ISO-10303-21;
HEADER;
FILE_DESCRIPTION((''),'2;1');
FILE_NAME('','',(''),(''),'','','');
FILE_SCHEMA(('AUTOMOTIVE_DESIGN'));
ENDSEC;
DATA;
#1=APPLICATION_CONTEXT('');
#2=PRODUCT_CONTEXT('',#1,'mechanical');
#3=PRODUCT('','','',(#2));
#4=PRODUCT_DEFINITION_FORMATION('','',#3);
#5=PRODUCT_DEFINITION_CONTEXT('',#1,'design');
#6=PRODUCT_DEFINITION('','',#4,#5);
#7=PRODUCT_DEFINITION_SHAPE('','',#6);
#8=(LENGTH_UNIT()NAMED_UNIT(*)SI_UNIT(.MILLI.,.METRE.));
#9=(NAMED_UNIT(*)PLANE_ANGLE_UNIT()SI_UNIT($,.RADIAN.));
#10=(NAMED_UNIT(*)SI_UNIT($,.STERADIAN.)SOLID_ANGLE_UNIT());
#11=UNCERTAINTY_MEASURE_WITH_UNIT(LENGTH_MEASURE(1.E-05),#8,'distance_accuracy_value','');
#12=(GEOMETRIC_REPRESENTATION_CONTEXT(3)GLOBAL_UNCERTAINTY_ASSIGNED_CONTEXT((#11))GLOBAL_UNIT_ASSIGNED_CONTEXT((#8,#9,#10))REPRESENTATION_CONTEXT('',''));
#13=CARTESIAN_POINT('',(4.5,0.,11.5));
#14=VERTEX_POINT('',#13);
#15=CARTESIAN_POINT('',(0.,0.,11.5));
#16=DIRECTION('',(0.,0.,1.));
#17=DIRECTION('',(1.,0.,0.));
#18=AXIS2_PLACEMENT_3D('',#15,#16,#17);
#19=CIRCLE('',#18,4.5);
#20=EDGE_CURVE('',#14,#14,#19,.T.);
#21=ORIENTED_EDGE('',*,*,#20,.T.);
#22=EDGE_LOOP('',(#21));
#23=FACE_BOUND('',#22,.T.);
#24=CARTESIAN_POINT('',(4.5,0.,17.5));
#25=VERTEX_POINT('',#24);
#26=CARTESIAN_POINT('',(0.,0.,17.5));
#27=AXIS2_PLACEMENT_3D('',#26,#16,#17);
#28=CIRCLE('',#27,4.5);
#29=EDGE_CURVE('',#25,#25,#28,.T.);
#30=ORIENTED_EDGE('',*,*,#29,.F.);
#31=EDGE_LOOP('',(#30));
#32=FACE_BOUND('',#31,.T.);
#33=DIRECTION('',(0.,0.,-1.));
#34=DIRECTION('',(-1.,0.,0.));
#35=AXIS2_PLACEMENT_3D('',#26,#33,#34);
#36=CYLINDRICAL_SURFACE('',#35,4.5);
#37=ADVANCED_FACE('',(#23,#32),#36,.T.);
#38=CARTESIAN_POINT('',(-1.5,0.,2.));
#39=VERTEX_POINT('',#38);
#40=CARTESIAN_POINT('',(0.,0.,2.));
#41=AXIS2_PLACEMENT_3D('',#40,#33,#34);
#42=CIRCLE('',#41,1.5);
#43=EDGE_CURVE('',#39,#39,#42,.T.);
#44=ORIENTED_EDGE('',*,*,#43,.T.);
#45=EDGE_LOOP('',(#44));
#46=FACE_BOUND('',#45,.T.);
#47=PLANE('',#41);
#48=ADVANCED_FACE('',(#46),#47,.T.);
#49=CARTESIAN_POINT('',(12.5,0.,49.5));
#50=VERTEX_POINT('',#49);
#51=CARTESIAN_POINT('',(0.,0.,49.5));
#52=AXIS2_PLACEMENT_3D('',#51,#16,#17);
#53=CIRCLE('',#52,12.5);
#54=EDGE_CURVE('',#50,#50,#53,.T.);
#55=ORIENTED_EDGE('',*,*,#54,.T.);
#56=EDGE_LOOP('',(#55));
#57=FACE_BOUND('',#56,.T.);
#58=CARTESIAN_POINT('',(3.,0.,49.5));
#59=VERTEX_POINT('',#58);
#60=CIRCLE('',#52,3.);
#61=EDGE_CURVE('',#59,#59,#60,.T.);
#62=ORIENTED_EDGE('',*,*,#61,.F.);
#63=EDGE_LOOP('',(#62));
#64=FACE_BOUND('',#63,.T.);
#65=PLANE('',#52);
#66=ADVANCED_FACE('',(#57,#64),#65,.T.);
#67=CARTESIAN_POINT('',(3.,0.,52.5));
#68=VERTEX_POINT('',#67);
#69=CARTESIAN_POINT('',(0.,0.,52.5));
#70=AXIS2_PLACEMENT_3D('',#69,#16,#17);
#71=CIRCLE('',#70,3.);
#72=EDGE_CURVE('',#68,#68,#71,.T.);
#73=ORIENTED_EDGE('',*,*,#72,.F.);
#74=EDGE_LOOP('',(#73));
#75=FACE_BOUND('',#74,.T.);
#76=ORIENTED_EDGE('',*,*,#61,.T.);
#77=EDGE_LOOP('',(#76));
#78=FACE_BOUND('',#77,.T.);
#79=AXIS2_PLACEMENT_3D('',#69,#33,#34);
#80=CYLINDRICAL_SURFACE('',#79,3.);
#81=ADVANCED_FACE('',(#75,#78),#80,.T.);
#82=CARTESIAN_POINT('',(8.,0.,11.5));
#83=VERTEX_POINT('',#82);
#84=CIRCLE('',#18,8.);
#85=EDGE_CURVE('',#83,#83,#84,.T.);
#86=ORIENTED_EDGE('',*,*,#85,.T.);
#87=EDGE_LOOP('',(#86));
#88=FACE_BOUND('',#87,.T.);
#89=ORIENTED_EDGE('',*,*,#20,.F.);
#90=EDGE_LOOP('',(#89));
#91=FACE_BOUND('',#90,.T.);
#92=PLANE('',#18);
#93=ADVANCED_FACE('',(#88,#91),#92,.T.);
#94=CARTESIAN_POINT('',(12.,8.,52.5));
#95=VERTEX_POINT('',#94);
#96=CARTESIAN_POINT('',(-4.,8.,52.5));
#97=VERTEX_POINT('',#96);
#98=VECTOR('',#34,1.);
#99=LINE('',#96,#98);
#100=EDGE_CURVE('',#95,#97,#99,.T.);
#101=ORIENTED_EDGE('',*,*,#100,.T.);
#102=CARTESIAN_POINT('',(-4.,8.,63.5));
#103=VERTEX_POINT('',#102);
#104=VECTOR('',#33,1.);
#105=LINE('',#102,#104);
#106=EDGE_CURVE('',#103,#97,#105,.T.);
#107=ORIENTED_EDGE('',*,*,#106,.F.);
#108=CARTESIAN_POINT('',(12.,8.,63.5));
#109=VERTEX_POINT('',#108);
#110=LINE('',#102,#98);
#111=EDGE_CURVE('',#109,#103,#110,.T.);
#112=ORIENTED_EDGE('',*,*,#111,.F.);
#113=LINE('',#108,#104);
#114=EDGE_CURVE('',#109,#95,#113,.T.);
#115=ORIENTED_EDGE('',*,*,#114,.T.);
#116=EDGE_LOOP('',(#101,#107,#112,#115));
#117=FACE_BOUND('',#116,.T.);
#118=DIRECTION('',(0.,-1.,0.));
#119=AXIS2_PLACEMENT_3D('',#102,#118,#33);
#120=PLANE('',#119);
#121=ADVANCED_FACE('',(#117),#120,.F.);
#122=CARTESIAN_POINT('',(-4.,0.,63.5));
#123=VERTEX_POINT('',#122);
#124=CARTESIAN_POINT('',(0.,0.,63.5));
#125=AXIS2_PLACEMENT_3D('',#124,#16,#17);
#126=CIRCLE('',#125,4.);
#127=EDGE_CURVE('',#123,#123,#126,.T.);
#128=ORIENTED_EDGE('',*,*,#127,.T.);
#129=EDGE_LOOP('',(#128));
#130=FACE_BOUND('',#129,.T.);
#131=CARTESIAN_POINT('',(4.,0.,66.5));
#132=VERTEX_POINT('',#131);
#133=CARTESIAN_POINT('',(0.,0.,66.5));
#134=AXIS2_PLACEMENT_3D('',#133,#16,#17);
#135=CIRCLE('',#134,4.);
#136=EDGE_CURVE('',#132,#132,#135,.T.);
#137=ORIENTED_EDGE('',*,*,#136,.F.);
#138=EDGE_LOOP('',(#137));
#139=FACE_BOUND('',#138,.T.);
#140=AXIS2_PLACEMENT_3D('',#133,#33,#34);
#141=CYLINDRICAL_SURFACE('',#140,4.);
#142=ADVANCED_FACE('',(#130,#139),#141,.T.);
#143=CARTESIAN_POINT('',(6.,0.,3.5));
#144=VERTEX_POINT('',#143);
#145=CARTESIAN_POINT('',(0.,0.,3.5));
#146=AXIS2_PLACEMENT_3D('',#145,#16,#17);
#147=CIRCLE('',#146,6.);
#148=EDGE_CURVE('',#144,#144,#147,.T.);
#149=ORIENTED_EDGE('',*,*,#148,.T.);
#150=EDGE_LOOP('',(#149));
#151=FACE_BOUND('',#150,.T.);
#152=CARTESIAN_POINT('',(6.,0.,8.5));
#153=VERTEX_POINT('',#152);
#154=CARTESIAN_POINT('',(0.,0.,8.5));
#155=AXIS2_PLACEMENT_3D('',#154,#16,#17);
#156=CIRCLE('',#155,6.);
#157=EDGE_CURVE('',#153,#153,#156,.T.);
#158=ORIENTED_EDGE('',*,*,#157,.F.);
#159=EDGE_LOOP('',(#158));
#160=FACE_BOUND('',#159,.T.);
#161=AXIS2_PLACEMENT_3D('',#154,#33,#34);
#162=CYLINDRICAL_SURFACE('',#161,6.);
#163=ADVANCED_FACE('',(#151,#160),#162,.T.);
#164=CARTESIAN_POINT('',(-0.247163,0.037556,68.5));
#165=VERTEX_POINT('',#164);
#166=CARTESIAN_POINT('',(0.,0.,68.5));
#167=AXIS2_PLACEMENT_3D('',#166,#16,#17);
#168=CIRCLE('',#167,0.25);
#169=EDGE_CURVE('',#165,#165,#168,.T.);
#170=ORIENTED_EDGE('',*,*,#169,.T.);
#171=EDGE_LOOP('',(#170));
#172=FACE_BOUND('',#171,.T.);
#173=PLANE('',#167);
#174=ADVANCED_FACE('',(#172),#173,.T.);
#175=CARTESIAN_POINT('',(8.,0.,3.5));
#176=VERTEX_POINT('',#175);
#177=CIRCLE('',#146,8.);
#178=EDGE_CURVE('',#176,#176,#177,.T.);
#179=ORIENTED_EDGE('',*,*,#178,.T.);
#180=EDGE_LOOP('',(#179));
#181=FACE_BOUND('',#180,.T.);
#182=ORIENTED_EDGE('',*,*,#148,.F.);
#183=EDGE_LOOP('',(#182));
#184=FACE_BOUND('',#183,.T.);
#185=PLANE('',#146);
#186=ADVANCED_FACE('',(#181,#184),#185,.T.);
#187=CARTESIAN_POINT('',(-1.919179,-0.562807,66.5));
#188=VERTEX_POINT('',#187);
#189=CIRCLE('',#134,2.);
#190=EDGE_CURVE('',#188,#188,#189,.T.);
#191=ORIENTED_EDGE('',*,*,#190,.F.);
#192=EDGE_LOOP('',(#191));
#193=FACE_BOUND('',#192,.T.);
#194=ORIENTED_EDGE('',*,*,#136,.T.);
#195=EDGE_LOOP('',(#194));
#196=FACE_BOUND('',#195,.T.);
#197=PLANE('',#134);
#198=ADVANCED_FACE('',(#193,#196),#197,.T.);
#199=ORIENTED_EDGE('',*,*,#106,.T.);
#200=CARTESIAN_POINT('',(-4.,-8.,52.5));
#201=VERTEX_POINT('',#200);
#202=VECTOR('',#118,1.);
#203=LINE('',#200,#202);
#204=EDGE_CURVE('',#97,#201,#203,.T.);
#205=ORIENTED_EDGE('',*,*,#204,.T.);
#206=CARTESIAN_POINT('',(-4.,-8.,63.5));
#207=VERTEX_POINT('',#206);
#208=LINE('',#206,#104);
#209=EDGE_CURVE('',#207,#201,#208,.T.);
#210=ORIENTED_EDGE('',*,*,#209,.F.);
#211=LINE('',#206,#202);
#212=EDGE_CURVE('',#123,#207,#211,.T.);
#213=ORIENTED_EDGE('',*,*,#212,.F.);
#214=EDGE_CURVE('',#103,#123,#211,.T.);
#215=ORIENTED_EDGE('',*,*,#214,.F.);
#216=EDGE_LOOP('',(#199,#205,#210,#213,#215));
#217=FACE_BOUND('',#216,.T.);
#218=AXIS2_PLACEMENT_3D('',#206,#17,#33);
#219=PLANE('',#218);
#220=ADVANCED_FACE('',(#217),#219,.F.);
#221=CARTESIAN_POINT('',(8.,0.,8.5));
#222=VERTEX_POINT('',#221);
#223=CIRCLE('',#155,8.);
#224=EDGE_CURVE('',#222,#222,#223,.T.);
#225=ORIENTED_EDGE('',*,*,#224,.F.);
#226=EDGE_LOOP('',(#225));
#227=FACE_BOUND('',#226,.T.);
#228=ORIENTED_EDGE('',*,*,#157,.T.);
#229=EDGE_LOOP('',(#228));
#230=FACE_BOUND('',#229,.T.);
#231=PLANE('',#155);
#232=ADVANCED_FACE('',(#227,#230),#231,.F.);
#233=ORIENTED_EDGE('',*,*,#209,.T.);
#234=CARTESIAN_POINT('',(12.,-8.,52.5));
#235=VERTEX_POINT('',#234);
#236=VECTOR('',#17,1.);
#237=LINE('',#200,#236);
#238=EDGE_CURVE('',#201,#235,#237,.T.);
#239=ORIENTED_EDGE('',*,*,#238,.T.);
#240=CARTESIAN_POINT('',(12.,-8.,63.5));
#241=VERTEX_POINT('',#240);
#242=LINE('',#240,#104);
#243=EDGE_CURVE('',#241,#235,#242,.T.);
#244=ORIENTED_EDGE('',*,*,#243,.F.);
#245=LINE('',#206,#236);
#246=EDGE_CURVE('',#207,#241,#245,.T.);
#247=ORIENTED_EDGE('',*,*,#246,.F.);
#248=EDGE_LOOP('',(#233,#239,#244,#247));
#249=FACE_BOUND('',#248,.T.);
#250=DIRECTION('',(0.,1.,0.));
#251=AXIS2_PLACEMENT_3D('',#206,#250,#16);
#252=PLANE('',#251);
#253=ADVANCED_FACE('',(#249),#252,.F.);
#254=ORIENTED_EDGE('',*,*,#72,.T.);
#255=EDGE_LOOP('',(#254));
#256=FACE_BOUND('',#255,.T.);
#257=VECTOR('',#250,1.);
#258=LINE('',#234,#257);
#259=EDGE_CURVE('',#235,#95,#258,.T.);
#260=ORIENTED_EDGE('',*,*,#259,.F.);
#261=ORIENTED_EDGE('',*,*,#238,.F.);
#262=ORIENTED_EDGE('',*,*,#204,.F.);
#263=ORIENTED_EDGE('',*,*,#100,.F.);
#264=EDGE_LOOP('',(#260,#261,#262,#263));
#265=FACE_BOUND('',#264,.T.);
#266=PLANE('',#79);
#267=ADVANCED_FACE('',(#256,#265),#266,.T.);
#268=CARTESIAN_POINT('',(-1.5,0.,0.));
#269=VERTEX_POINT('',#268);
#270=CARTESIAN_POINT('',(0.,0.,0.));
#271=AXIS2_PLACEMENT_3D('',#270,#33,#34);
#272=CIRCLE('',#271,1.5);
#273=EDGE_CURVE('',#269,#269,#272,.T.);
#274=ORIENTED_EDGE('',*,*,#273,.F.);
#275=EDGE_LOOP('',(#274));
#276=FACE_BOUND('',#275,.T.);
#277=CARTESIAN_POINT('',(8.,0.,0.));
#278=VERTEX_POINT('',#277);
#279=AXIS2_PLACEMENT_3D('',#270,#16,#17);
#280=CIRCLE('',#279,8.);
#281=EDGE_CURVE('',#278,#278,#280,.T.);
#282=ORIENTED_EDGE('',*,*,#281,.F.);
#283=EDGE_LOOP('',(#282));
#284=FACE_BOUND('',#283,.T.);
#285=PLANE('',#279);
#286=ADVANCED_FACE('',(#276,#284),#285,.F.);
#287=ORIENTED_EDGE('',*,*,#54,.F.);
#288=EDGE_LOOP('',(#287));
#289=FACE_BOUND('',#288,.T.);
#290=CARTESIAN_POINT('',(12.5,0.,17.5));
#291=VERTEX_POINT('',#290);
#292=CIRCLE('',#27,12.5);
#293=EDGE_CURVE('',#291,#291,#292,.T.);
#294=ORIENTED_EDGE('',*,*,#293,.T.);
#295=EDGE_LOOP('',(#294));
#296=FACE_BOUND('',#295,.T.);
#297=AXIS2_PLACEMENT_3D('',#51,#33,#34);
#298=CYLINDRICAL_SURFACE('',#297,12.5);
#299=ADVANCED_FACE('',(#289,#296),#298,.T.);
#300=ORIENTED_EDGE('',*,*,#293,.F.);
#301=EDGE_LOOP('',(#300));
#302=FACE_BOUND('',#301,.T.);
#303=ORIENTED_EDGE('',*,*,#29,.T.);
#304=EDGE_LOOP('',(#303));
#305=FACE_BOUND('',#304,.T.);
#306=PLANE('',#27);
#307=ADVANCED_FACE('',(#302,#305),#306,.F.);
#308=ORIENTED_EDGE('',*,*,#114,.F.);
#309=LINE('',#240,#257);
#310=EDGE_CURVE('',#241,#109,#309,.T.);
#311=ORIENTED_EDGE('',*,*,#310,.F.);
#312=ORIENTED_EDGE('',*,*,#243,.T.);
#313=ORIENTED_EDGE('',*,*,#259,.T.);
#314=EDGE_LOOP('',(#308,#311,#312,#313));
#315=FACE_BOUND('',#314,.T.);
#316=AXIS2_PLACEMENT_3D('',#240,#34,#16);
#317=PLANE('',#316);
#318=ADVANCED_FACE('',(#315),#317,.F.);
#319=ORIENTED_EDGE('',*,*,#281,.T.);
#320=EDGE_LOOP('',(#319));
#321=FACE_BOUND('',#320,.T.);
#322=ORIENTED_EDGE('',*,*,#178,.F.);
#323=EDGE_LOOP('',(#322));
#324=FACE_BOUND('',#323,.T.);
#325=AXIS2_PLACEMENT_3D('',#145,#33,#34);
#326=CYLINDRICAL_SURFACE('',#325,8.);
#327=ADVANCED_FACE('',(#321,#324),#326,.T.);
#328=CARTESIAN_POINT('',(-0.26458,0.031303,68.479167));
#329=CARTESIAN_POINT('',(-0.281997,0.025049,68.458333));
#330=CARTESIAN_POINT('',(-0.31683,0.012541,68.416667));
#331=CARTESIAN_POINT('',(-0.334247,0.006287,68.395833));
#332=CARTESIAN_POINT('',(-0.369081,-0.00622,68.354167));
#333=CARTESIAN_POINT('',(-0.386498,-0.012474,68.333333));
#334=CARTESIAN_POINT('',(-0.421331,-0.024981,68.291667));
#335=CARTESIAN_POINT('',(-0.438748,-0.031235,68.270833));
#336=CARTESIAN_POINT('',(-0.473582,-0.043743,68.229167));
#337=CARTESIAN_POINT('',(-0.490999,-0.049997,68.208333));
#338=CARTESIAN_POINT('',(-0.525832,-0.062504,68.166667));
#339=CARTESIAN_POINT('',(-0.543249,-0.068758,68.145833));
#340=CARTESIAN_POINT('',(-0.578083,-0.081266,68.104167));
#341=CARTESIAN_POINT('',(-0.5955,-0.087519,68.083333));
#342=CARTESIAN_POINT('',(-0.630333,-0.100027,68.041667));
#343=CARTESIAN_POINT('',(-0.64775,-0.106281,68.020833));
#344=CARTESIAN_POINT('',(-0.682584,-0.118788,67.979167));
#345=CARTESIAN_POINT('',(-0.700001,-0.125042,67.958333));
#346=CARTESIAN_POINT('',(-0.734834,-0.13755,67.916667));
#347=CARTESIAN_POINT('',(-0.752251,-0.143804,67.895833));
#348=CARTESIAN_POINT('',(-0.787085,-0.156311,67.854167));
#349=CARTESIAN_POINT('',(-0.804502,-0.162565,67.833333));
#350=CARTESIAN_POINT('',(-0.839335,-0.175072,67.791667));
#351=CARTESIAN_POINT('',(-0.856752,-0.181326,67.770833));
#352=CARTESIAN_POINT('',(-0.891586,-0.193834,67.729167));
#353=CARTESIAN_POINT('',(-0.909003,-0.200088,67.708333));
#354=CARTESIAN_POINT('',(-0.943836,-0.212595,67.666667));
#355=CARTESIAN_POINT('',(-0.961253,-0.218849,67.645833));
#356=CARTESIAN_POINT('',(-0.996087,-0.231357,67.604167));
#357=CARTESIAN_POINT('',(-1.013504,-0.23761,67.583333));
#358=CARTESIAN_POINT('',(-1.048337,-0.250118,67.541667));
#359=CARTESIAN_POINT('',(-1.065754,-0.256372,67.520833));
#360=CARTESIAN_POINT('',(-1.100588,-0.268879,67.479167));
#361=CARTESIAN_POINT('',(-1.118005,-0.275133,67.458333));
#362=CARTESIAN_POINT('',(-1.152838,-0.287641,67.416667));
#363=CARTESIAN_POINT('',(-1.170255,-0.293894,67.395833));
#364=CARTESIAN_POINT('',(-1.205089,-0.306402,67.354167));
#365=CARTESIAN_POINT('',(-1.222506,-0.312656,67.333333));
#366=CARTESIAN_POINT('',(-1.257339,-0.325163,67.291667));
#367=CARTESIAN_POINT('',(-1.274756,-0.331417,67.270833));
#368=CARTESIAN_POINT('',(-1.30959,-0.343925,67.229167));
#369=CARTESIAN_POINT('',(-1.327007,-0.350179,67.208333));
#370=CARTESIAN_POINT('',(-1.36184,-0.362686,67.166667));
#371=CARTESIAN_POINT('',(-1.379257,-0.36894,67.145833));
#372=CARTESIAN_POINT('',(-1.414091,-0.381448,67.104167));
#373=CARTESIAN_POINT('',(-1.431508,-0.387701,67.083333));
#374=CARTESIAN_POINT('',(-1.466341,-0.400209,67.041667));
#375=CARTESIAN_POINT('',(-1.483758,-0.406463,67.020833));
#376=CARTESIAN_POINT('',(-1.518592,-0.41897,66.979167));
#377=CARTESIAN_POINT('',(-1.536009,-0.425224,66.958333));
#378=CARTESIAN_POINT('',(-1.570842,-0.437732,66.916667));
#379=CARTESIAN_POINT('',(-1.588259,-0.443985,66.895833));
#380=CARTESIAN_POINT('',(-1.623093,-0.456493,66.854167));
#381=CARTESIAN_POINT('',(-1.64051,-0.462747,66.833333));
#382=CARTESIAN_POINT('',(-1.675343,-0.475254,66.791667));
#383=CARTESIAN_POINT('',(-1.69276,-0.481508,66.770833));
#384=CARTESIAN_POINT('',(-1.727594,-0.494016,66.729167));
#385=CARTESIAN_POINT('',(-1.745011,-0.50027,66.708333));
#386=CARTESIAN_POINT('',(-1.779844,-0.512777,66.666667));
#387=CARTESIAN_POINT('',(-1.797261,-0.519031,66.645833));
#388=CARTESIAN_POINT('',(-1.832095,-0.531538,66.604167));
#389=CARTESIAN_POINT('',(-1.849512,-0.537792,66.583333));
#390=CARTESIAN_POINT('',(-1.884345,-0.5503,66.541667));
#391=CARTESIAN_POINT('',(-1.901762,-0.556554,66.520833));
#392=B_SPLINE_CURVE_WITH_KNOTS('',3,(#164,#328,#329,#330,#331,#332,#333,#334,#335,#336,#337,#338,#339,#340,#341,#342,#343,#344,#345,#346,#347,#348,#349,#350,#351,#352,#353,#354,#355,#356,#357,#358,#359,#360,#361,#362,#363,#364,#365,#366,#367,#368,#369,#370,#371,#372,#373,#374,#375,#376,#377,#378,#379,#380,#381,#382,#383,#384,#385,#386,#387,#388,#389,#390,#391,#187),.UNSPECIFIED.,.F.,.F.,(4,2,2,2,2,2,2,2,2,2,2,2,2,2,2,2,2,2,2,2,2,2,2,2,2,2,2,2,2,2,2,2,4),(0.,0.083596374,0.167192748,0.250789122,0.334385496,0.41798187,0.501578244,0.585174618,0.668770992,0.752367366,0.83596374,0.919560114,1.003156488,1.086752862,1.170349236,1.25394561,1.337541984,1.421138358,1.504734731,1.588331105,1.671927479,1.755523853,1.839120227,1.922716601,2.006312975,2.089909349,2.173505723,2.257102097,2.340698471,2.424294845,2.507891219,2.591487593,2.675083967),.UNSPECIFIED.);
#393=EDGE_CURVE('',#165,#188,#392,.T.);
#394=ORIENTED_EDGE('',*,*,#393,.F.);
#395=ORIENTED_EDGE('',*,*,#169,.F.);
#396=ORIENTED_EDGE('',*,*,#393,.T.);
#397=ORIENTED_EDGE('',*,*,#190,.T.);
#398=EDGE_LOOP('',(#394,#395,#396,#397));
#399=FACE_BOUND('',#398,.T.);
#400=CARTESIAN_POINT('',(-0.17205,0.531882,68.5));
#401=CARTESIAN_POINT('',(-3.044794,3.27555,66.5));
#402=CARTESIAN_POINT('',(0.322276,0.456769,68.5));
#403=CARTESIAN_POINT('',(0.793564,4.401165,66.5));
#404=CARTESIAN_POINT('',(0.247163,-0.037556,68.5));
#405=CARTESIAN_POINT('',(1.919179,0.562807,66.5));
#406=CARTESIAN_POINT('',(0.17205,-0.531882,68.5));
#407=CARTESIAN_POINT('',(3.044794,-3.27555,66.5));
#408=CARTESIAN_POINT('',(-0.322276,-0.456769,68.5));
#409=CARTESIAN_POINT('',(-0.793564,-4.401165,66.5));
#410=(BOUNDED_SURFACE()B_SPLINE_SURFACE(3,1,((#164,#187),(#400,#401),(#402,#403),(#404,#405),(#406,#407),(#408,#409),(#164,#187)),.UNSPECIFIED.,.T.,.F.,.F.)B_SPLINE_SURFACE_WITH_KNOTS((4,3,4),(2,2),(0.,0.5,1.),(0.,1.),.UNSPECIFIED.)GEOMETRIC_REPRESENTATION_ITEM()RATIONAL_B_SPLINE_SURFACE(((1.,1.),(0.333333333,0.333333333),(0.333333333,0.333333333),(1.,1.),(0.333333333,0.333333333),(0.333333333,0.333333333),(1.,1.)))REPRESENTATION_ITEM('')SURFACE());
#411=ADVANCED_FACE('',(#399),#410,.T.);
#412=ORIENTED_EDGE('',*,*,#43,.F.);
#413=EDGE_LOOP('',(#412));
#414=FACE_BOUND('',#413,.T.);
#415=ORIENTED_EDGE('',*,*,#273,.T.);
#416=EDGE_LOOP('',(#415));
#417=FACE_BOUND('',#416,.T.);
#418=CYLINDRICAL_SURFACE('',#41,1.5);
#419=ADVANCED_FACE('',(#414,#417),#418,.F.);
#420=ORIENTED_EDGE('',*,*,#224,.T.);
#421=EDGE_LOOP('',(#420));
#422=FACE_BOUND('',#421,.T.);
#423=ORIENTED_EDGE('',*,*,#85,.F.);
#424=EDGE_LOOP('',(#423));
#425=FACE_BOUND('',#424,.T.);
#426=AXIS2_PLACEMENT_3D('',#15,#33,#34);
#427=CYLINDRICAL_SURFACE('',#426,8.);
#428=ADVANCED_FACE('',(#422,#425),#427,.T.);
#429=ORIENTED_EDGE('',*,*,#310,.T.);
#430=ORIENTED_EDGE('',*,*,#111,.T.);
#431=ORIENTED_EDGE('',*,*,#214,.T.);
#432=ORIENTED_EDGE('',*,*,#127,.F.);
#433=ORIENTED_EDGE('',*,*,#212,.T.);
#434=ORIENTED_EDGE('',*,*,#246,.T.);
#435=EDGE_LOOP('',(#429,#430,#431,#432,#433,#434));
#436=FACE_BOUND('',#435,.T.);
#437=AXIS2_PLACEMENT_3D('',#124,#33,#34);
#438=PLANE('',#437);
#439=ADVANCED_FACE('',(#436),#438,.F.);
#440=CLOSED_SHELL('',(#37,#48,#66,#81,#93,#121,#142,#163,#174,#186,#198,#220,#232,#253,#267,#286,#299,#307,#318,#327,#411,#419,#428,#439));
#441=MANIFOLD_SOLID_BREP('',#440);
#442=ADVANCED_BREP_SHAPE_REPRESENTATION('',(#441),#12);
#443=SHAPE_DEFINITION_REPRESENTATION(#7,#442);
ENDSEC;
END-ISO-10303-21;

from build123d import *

# Parameters (mm, degrees)
SKETCH1_R           = 8
BOSS_EXTRUDE1_DEPTH = 3.5
SKETCH2_R           = 6
BOSS_EXTRUDE2_DEPTH = 5
SKETCH3_R           = 8
BOSS_EXTRUDE3_DEPTH = 3
SKETCH4_R           = 4.5
BOSS_EXTRUDE4_DEPTH = 6
SKETCH5_R           = 12.5
BOSS_EXTRUDE5_DEPTH = 32
SKETCH6_R           = 3
BOSS_EXTRUDE6_DEPTH = 3
SKETCH7_W           = 16
SKETCH7_H           = 16
BOSS_EXTRUDE7_DEPTH = 11
SKETCH8_R           = 4
BOSS_EXTRUDE8_DEPTH = 3
SKETCH10_R          = 1.5
CUT_EXTRUDE1_DEPTH  = 2


with BuildPart() as part:
    # Sketch1 → Boss-Extrude1 (new body)
    with BuildSketch(Plane.XY):
        Circle(SKETCH1_R)
    extrude(amount=BOSS_EXTRUDE1_DEPTH)

    # Sketch2 → Boss-Extrude2 (add)
    with BuildSketch(Plane.XY.offset(3.5)):
        Circle(SKETCH2_R)
    extrude(amount=BOSS_EXTRUDE2_DEPTH)

    # Sketch3 → Boss-Extrude3 (add)
    with BuildSketch(Plane.XY.offset(8.5)):
        Circle(SKETCH3_R)
    extrude(amount=BOSS_EXTRUDE3_DEPTH)

    # Sketch4 → Boss-Extrude4 (add)
    with BuildSketch(Plane.XY.offset(11.5)):
        Circle(SKETCH4_R)
    extrude(amount=BOSS_EXTRUDE4_DEPTH)

    # Sketch5 → Boss-Extrude5 (add)
    with BuildSketch(Plane.XY.offset(17.5)):
        Circle(SKETCH5_R)
    extrude(amount=BOSS_EXTRUDE5_DEPTH)

    # Sketch6 → Boss-Extrude6 (add)
    with BuildSketch(Plane.XY.offset(49.5)):
        Circle(SKETCH6_R)
    extrude(amount=BOSS_EXTRUDE6_DEPTH)

    # Sketch7 → Boss-Extrude7 (add)
    with BuildSketch(Plane.XY.offset(52.5)):
        with Locations((4, 0)):
            Rectangle(SKETCH7_W, SKETCH7_H)
    extrude(amount=BOSS_EXTRUDE7_DEPTH)

    # Sketch8 → Boss-Extrude8 (add)
    with BuildSketch(Plane.XY.offset(63.5)):
        with Locations(Location((0, 0, 0), (0, 0, 180))):
            Circle(SKETCH8_R)
    extrude(amount=BOSS_EXTRUDE8_DEPTH)

    # Sketch10 → Cut-Extrude1 (cut)
    with BuildSketch(Plane(origin=(0, 0, 0), x_dir=(-1, 0, 0), z_dir=(0, 0, -1))):
        Circle(SKETCH10_R)
    extrude(amount=-CUT_EXTRUDE1_DEPTH, mode=Mode.SUBTRACT)

    # Loft1: read off the stored shape, not the designer's step
    # Loft1: loft between two sections, ruled curve by curve
    loft1_from = [
        Edge.make_bspline([(-0.247162936, 0.037556397, 68.5), (-0.172050142, 0.53188227, 68.5), (0.322275731, 0.456769475, 68.5), (0.247162936, -0.037556397, 68.5), (0.172050142, -0.53188227, 68.5), (-0.322275731, -0.456769475, 68.5), (-0.247162936, 0.037556397, 68.5)], [0, 0, 0, 0, 0.5, 0.5, 0.5, 1, 1, 1, 1], 3, [1, 0.333333333, 0.333333333, 1, 0.333333333, 0.333333333, 1]),
    ]
    loft1_to = [
        Edge.make_bspline([(-1.919178945, -0.562807407, 66.5), (-3.044793759, 3.275550482, 66.5), (0.79356413, 4.401165297, 66.5), (1.919178945, 0.562807407, 66.5), (3.044793759, -3.275550482, 66.5), (-0.79356413, -4.401165297, 66.5), (-1.919178945, -0.562807407, 66.5)], [0, 0, 0, 0, 0.5, 0.5, 0.5, 1, 1, 1, 1], 3, [1, 0.333333333, 0.333333333, 1, 0.333333333, 0.333333333, 1]),
    ]
    loft1 = Solid(Shell([*[Face.make_surface_from_curves(loft1_from[k], loft1_to[k]) for k in range(1)], Face(Wire(loft1_from)), Face(Wire(loft1_to))]))
    add(loft1)


solid = part.part
